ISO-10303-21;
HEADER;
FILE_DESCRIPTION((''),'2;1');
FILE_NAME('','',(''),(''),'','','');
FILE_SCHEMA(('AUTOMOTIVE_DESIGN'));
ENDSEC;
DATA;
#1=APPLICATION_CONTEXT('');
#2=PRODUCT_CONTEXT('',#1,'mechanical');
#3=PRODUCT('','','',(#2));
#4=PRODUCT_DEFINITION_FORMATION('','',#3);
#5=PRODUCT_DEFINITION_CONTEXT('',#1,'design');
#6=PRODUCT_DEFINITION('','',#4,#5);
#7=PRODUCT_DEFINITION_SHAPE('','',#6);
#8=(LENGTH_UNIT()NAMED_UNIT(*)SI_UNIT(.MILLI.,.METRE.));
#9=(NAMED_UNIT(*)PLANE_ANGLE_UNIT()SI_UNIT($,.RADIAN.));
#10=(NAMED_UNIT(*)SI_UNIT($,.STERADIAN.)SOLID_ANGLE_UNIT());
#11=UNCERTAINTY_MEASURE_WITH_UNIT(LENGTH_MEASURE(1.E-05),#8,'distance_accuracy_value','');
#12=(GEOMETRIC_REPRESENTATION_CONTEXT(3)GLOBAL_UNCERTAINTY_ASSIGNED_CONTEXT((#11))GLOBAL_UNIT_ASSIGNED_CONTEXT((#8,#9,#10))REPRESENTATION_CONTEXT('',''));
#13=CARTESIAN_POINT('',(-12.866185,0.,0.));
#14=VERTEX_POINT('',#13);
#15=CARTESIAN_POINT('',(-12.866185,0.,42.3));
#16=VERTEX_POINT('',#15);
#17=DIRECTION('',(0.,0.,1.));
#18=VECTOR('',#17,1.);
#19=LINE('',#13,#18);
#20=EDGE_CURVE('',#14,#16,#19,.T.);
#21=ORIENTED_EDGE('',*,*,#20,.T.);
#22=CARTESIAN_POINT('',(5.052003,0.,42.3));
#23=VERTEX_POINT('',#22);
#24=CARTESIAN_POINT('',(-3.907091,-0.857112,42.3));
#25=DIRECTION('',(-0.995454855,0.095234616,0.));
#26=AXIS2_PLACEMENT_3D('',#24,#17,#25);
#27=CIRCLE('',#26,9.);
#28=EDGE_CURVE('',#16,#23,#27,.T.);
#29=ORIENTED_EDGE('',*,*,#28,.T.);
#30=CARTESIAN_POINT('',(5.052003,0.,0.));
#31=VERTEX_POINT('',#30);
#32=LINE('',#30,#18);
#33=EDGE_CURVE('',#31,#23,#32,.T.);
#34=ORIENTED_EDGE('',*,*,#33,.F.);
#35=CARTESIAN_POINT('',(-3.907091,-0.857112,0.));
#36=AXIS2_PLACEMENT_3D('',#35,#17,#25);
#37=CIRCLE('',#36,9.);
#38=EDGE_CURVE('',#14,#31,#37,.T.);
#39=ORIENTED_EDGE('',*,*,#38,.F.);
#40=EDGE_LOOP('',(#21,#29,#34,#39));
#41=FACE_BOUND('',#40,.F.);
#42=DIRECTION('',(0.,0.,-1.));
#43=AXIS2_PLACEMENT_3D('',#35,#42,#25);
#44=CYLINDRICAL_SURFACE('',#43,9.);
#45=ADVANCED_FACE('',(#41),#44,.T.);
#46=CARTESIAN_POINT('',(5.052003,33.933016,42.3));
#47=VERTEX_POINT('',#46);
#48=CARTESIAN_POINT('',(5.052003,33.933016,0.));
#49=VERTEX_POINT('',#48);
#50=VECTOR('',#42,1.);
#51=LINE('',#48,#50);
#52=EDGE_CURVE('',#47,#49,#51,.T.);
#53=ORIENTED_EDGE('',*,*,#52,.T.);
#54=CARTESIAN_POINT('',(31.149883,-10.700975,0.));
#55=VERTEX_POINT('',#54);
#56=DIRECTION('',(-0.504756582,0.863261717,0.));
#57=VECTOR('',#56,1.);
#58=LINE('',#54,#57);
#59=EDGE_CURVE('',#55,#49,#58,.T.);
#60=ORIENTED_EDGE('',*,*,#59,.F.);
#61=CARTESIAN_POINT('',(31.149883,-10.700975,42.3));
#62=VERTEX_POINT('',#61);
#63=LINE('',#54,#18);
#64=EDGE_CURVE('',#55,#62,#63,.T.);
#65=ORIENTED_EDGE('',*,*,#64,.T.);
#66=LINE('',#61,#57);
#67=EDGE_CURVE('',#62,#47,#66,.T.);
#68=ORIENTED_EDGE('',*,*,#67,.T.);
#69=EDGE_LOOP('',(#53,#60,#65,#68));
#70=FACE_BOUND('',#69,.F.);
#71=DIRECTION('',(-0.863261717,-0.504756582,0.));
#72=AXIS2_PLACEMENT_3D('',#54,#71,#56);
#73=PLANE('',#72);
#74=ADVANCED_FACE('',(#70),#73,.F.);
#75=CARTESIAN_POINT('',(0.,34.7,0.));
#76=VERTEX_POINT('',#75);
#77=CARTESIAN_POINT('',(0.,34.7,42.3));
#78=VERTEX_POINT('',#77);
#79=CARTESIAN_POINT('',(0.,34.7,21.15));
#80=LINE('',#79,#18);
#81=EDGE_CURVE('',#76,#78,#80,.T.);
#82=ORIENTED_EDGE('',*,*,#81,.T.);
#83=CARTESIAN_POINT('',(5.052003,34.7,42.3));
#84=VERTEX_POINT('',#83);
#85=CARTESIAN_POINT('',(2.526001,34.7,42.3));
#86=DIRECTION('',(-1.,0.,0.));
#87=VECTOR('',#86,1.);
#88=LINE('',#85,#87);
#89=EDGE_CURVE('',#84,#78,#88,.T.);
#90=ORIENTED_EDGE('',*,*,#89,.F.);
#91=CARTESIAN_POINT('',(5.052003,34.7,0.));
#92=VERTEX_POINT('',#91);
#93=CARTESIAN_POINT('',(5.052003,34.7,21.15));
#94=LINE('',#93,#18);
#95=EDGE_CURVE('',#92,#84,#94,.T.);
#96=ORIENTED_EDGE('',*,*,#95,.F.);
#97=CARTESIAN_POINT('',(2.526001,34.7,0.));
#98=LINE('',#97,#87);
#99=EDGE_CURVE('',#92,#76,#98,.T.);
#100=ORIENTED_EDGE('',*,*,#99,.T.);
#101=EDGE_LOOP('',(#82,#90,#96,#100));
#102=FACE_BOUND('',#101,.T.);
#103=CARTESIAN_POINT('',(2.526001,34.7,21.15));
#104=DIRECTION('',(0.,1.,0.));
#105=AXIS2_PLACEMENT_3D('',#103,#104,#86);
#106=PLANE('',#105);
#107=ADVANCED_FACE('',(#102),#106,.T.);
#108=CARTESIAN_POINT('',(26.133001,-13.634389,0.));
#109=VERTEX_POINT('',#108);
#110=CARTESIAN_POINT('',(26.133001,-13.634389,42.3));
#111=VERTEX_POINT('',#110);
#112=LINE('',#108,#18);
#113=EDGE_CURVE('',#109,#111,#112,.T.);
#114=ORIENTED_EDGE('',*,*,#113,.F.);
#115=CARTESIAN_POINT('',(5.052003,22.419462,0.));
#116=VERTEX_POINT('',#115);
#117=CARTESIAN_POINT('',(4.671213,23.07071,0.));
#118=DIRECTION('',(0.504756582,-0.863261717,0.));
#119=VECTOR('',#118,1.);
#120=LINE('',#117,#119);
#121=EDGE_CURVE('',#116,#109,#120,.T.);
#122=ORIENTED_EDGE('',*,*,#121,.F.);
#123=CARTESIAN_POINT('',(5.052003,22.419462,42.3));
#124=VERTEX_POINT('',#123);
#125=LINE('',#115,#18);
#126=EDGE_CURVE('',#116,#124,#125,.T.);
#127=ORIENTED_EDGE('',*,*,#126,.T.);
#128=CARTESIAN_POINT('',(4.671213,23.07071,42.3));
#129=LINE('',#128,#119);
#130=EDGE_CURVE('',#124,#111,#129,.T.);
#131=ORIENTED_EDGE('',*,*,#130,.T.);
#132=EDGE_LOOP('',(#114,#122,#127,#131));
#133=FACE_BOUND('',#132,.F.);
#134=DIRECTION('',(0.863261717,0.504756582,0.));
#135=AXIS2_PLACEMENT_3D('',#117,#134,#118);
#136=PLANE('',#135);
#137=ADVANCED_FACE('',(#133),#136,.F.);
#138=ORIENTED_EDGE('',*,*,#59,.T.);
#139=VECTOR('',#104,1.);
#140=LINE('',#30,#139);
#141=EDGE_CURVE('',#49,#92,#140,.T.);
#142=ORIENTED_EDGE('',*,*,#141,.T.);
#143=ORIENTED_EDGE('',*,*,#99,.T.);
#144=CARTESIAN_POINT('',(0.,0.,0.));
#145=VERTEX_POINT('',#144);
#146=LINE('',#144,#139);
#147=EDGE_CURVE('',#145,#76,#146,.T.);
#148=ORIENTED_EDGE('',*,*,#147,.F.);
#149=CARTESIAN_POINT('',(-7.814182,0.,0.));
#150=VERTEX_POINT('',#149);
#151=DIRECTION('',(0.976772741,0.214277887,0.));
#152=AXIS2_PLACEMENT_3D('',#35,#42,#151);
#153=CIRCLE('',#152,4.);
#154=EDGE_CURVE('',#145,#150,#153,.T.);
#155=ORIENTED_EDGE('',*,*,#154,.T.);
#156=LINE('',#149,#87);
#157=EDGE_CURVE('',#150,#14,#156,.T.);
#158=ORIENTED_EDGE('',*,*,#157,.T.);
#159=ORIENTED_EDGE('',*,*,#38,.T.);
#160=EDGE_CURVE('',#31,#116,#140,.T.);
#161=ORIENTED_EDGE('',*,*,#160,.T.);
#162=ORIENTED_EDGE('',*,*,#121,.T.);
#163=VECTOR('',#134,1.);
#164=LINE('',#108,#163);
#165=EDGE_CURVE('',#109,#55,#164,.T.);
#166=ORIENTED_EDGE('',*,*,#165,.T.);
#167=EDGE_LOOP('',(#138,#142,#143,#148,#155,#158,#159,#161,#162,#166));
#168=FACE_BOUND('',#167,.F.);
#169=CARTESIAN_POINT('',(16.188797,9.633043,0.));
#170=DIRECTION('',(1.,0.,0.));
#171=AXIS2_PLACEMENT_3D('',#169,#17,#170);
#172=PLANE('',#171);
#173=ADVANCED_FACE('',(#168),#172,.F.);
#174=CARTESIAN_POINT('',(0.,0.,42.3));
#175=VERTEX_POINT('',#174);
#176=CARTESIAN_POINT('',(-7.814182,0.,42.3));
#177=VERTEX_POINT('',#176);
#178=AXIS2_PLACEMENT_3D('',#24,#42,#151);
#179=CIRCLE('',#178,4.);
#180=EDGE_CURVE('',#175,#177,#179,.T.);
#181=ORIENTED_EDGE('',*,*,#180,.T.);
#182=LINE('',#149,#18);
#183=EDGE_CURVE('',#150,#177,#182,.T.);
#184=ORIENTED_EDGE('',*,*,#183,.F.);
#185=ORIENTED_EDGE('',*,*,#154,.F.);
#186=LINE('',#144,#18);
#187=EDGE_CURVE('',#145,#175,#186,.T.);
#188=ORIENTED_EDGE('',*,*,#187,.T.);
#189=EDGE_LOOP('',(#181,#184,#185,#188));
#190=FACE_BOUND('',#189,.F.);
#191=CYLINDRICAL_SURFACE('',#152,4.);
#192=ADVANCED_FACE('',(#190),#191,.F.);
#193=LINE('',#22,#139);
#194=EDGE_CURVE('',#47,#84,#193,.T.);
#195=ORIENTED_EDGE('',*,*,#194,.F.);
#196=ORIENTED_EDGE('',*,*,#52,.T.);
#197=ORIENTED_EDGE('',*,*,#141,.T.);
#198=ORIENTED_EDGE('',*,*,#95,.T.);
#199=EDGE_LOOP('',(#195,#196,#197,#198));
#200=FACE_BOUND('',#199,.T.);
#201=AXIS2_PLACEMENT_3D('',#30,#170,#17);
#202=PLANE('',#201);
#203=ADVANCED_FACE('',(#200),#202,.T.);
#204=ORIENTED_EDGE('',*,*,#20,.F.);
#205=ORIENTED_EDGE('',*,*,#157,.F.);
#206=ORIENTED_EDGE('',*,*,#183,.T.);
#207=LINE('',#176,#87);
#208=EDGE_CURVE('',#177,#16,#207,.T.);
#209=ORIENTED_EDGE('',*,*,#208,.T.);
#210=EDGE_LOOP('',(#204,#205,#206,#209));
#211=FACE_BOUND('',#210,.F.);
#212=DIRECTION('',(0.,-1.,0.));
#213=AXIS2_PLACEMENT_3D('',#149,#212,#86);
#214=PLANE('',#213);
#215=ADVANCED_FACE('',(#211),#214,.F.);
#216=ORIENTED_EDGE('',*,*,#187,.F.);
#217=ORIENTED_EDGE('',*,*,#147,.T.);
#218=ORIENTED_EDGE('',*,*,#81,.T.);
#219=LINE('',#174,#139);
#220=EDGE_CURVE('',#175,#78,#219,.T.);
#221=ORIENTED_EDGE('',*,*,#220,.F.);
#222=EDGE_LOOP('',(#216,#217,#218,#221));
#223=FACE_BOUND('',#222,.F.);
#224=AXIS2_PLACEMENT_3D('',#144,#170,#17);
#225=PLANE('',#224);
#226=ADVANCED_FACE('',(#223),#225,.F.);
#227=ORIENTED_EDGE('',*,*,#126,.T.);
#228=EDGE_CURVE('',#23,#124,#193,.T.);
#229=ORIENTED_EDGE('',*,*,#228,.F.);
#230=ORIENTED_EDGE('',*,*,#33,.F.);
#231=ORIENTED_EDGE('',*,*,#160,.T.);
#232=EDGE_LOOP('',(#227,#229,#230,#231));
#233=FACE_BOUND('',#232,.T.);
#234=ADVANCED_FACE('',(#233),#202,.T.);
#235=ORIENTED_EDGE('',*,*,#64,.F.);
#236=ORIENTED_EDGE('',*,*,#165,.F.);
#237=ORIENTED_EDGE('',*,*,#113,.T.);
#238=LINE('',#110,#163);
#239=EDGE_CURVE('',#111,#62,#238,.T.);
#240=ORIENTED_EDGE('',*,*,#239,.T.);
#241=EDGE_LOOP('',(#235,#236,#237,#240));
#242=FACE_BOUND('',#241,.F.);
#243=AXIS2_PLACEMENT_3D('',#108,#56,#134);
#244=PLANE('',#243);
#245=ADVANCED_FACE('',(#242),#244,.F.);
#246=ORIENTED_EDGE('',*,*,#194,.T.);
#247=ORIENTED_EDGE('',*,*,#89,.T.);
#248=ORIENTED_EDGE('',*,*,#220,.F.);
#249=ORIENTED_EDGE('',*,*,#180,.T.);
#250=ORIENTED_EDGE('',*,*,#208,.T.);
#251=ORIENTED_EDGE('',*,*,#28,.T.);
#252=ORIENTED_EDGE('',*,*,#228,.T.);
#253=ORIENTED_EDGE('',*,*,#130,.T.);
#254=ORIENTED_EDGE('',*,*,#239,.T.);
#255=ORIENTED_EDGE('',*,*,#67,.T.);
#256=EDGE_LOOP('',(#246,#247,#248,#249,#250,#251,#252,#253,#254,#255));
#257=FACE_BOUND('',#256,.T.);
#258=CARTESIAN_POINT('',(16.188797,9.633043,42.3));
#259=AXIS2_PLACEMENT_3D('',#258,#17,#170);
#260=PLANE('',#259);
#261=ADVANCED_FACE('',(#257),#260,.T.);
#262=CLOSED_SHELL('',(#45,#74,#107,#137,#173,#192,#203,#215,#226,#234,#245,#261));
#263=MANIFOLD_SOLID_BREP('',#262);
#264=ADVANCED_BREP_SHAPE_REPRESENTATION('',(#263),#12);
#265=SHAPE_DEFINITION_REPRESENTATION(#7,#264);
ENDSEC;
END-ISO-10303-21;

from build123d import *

# Parameters (mm, degrees)
F3_DEPTH = 42.3
F4_W     = 5.0520027294
F4_H     = 42.3
F5_DEPTH = 34.7
F7_DEPTH = 42.3


# Not quite as in the source:
# - the program builds the solid bodies; features that only make, move or delete a surface that nothing else refers to are left out


with BuildPart() as f3:
    # F0 (on Top) → F3 (new body)
    with BuildSketch(Plane.XY):
        with BuildLine():
            ThreePointArc((0, 0), (-3.9070909635, -4.8571115465), (-7.8141819269, 0))
            Line((-7.8141819269, 0), (-12.8661846563, 0))
            ThreePointArc((-12.8661846563, 0), (-3.9070909635, -9.8571115465), (5.0520027294, 0))
            Line((5.0520027294, 0), (0, 0))
        make_face()
    extrude(amount=F3_DEPTH)

    # F4 (on face) → F5 (join)
    with BuildSketch(Plane(origin=(0, 0, 0), x_dir=(-1, 0, 0), z_dir=(0, 1, 0))):
        with Locations((-2.5260013647, 21.15)):
            Rectangle(F4_W, F4_H)
    extrude(amount=F5_DEPTH)

    # F6 (on Top) → F7 (join)
    with BuildSketch(Plane.XY):
        Polygon((31.1498828232, -10.7009746134), (4.7412305139, 34.4645157456), (4.6712128018, 23.0707097992), (26.133000959, -13.6343887705), align=None)
    extrude(amount=F7_DEPTH)


solid = f3.part
